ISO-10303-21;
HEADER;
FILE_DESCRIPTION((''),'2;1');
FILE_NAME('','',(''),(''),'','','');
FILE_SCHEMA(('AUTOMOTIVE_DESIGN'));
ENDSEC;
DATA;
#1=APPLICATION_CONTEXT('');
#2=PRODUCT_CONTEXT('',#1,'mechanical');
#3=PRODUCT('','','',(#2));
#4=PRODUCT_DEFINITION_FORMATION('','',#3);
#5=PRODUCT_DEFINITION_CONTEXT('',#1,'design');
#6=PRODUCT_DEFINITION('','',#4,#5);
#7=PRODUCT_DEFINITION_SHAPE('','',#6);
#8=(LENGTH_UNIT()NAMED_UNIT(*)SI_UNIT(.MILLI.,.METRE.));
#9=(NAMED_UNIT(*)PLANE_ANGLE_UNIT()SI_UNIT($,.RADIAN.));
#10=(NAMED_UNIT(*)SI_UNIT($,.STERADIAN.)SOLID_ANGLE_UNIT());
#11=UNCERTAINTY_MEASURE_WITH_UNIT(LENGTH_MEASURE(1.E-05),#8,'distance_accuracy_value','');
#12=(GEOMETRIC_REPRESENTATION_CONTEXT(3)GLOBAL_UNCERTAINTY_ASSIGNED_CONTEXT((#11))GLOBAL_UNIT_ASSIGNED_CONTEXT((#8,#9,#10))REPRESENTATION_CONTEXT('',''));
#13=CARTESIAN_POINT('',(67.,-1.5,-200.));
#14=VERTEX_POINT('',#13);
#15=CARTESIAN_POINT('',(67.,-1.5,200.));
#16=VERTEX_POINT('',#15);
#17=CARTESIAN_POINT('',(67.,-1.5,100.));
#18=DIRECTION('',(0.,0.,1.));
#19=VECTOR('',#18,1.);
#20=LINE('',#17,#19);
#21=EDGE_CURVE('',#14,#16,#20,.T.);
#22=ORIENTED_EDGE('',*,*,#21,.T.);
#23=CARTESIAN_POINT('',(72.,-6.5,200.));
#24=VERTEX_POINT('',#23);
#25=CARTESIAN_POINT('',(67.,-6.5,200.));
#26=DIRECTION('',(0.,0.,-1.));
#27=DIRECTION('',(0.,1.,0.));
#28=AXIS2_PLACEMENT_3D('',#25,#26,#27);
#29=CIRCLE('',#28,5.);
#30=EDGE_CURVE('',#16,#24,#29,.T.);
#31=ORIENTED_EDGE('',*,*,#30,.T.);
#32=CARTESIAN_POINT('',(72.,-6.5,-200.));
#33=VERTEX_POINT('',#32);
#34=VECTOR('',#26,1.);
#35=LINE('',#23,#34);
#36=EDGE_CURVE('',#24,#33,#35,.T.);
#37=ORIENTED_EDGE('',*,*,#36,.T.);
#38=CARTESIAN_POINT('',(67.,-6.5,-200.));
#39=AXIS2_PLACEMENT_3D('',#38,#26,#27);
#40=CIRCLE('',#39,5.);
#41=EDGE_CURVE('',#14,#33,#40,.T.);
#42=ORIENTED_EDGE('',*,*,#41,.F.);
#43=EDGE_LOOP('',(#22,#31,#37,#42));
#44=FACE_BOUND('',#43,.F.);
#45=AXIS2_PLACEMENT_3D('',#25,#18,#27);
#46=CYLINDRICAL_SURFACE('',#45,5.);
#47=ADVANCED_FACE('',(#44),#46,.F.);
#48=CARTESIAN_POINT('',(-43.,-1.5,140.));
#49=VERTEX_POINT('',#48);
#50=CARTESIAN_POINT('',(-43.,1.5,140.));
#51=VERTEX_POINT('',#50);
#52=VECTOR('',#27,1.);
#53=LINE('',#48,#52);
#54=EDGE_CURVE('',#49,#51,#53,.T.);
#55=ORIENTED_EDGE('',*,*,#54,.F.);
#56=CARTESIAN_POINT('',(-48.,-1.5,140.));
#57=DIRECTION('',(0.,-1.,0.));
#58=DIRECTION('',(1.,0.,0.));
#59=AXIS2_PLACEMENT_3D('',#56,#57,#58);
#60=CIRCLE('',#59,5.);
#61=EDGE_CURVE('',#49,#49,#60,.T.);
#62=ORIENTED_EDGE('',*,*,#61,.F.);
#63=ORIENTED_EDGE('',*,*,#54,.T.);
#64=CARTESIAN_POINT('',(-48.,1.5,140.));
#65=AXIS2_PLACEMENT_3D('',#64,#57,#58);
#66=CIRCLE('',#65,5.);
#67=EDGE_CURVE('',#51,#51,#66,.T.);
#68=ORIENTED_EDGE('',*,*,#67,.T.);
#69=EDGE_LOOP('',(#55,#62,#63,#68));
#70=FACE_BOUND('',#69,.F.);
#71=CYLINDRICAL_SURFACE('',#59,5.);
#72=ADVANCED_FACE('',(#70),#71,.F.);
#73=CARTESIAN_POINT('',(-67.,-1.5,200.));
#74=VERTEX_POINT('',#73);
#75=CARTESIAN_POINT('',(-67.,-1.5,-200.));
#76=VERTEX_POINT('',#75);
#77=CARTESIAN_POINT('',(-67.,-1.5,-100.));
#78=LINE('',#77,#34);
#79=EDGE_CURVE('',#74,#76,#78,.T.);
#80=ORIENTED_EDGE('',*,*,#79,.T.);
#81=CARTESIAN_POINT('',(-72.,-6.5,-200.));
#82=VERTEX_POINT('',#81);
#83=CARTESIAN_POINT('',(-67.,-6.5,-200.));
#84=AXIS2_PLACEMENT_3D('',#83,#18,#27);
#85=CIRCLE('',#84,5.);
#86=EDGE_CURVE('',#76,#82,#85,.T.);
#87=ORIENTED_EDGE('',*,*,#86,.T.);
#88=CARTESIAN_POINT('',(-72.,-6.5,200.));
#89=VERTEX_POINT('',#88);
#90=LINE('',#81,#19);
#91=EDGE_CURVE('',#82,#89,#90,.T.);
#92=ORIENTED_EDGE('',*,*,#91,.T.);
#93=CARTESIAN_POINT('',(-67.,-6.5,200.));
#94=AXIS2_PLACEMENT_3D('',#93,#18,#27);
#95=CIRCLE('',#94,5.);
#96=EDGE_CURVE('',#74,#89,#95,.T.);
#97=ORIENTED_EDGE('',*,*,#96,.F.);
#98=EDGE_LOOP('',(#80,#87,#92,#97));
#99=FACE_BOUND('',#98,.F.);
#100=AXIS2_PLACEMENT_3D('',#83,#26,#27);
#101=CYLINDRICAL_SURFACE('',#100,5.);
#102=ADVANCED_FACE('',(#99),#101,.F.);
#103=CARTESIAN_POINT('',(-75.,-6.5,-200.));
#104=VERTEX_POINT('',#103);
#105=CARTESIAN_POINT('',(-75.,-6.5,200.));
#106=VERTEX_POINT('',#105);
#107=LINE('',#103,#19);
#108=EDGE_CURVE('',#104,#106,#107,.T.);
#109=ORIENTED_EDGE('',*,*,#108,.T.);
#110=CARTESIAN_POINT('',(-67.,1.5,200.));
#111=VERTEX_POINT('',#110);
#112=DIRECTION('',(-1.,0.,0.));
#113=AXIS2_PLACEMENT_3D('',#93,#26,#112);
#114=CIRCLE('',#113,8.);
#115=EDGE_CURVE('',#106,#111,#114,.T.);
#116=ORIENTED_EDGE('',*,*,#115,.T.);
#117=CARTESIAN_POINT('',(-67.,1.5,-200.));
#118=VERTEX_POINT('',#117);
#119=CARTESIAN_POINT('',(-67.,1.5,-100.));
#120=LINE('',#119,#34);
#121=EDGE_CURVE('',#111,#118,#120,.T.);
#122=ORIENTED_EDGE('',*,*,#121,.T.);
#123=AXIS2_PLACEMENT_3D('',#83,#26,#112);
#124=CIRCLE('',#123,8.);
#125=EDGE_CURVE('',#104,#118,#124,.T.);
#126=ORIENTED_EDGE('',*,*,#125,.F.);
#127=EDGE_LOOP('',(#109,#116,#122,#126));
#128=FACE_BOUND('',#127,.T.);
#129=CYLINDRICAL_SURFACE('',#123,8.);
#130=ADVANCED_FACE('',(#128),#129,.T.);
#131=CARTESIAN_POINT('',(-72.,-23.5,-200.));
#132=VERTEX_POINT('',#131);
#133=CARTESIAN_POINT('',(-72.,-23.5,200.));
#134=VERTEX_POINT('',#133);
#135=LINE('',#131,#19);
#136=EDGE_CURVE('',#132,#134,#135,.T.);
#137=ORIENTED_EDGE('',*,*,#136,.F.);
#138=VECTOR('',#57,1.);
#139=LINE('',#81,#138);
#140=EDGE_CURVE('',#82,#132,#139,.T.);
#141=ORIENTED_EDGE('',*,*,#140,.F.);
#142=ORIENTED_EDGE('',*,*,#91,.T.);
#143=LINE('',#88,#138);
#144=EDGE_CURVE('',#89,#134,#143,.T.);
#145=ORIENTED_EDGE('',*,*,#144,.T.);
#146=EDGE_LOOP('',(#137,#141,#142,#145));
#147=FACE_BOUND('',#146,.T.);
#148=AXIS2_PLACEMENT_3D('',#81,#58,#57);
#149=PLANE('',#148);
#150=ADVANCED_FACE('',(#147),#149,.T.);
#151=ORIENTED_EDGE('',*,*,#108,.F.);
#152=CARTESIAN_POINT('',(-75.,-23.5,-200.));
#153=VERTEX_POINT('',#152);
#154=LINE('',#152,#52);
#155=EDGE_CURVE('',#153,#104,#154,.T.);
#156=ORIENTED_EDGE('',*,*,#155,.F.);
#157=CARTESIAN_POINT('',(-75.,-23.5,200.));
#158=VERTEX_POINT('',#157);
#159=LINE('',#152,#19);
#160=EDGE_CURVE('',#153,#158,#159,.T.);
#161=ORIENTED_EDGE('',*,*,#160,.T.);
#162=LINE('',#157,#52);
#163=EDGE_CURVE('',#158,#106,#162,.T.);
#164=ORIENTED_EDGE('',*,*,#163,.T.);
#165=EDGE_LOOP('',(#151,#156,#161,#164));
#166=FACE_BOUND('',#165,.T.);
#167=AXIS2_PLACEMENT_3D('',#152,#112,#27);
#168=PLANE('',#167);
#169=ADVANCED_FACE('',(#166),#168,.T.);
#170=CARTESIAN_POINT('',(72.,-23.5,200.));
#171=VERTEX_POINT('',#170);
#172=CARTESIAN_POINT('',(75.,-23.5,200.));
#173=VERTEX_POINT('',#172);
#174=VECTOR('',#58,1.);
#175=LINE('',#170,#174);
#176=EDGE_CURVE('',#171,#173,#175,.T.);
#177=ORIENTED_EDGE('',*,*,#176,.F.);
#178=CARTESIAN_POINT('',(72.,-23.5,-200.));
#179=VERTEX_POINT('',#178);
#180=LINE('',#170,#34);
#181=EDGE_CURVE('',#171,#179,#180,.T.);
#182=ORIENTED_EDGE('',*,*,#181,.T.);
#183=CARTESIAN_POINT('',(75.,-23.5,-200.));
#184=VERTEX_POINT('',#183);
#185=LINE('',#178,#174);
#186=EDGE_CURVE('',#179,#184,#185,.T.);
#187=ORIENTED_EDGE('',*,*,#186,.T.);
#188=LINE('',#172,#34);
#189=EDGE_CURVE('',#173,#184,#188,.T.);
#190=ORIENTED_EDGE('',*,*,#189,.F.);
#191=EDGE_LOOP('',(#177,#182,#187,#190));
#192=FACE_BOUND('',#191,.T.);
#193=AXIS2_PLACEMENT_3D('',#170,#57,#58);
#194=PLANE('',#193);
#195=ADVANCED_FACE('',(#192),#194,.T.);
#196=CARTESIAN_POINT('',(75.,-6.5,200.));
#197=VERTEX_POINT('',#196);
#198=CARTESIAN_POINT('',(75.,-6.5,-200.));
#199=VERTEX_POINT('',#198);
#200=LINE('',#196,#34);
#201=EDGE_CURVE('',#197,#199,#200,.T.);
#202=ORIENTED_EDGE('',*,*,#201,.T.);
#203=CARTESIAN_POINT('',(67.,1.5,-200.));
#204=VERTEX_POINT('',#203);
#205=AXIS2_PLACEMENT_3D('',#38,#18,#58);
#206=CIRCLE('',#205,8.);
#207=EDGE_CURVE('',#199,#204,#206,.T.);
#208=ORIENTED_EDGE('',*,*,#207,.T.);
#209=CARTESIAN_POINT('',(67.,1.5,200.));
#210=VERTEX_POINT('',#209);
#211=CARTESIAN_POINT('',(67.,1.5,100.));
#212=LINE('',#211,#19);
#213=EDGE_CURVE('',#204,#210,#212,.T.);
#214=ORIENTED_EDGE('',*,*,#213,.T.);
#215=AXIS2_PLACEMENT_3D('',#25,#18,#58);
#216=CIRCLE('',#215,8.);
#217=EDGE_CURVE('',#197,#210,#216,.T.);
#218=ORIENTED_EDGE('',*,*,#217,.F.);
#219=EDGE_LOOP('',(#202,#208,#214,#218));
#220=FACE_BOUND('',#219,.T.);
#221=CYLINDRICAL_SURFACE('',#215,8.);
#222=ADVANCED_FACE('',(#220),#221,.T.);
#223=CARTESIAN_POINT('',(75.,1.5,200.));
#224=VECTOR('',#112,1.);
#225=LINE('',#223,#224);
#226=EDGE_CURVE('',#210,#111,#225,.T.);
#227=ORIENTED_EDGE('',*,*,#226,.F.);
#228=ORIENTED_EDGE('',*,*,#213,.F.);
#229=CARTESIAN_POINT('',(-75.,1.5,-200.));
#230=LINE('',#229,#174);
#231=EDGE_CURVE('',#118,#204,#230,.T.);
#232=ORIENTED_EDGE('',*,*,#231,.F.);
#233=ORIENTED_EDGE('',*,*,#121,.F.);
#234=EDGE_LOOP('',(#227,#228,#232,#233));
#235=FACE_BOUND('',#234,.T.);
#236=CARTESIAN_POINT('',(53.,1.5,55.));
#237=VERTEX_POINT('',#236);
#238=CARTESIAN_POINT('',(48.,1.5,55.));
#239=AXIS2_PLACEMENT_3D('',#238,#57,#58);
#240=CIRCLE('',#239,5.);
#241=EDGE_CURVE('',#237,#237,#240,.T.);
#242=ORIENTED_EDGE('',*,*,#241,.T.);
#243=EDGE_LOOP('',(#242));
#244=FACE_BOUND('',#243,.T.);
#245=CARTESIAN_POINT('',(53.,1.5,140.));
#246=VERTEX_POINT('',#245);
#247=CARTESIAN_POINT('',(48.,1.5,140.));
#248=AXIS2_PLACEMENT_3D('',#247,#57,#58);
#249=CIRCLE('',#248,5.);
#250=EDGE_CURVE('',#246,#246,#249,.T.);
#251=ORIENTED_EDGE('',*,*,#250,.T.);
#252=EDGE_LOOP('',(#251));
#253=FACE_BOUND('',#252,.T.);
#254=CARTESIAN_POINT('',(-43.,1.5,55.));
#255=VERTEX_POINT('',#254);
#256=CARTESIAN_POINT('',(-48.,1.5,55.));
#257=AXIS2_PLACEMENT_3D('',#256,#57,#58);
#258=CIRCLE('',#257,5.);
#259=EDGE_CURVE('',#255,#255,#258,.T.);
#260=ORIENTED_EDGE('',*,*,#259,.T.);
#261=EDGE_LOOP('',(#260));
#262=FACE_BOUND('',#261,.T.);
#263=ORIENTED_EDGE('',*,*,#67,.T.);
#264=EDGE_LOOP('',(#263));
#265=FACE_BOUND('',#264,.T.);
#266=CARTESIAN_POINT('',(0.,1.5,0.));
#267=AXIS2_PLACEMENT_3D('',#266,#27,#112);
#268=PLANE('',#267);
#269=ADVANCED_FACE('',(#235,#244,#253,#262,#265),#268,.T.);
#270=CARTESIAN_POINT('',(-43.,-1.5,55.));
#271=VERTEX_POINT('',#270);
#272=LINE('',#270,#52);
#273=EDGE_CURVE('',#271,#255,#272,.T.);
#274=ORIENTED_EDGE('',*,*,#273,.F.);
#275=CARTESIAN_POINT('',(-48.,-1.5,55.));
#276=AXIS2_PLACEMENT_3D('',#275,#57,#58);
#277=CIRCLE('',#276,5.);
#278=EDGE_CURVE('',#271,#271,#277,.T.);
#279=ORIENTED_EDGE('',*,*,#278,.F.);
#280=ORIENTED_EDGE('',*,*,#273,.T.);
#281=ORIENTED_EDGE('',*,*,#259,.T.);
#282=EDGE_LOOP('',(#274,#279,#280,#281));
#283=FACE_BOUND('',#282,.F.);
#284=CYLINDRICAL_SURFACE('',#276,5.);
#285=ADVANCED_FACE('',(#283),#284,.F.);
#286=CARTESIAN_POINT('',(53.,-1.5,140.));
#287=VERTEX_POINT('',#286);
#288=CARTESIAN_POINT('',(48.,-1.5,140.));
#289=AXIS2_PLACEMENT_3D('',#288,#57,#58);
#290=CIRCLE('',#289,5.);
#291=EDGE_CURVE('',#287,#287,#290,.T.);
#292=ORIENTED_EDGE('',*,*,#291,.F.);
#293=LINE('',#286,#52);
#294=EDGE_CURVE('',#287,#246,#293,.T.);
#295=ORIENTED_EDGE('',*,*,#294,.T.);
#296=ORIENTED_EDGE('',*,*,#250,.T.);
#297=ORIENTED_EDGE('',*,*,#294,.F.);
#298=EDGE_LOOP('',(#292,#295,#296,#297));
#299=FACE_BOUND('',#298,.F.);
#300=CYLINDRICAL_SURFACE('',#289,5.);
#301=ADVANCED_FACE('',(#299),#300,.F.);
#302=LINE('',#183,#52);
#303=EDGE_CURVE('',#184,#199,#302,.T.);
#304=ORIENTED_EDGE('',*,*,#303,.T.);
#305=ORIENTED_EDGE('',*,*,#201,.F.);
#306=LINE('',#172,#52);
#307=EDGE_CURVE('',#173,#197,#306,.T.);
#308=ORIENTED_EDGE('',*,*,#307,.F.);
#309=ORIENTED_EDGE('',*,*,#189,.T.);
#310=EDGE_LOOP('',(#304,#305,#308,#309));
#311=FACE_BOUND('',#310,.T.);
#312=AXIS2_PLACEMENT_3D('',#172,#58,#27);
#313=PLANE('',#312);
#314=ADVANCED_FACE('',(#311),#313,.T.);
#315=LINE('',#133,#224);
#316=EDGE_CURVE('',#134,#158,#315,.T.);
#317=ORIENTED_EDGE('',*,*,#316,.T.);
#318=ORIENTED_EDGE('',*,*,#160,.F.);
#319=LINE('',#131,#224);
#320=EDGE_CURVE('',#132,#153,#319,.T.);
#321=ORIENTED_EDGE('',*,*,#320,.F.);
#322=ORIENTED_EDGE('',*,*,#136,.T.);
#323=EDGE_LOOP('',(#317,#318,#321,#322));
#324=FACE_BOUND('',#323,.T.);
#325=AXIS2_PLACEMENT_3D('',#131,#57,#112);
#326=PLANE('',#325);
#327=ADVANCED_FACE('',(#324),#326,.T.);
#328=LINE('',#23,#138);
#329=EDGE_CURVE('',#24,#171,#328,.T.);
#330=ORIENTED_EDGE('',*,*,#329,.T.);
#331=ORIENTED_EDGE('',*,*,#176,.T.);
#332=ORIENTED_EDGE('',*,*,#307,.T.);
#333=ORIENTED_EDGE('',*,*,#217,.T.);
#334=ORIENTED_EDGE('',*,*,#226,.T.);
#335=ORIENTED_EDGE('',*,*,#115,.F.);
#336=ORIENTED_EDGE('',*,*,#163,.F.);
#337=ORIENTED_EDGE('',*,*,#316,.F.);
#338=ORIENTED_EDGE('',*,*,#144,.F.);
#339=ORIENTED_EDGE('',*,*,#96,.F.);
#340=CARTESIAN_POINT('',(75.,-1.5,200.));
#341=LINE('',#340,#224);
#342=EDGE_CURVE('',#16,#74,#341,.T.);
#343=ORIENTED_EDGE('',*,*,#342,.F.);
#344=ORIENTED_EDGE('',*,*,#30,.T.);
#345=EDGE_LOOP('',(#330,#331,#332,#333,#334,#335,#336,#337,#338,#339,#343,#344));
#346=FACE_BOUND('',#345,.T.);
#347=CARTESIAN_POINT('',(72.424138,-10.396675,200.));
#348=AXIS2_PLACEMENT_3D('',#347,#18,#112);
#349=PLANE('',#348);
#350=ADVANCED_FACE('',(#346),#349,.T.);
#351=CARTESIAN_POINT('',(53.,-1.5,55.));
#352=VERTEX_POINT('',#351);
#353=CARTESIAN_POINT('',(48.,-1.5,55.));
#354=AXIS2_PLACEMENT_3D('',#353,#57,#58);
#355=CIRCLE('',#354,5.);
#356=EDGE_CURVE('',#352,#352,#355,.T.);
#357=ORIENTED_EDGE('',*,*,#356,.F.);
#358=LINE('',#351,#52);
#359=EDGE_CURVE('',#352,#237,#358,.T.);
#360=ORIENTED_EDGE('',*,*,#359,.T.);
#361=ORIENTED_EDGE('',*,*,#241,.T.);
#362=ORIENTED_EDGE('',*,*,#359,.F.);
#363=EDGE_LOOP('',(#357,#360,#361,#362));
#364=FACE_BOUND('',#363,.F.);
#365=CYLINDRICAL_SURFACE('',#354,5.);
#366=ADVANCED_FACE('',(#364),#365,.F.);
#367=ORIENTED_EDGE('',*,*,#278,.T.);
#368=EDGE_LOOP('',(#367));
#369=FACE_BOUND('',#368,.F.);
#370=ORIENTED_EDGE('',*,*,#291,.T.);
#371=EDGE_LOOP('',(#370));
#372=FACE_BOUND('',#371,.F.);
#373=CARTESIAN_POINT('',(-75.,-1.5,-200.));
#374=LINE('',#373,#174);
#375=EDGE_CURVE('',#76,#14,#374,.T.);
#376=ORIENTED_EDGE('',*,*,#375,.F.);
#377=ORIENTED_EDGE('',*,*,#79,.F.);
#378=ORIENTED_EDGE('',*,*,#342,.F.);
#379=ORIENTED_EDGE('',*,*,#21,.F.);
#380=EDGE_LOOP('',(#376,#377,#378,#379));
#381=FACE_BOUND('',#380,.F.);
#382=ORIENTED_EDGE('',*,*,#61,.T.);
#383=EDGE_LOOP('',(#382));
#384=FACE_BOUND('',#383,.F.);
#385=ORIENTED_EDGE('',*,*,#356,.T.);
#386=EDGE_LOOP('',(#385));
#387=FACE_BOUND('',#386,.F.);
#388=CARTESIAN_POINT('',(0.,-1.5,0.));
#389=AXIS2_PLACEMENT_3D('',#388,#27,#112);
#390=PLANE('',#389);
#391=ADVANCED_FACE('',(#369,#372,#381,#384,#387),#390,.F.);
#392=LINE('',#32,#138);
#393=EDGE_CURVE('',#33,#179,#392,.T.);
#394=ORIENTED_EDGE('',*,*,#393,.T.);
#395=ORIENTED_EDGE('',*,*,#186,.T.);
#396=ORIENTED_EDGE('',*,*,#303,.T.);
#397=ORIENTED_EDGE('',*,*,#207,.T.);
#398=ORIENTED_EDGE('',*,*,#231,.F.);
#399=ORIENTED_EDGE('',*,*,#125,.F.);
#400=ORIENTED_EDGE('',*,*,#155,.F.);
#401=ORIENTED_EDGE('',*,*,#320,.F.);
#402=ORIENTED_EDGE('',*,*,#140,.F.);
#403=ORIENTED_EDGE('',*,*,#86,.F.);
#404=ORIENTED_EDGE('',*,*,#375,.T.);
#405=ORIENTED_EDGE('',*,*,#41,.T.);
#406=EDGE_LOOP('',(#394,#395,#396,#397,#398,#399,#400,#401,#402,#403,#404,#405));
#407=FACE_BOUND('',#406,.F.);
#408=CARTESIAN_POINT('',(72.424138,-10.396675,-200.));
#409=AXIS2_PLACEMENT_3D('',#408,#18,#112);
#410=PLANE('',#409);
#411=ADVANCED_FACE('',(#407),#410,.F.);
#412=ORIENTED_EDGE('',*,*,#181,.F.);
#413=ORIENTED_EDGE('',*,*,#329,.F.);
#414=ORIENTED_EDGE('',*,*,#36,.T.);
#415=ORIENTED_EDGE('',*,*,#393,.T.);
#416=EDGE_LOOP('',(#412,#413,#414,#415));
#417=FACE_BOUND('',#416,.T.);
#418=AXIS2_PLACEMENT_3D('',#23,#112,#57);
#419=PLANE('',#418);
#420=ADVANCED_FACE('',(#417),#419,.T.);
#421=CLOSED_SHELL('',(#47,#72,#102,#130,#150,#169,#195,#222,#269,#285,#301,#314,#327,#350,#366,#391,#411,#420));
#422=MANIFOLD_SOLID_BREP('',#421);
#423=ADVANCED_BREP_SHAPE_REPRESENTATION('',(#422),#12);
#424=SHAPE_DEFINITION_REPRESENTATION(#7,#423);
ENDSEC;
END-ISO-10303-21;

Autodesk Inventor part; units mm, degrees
ref_plane "YZ Plane" through (0, 0, 0) normal (1, 0, 0) x (0, 1, 0)
ref_plane "XZ Plane" through (0, 0, 0) normal (0, 1, 0) x (-1, 0, 0)
ref_plane "XY Plane" through (0, 0, 0) normal (0, 0, 1) x (1, 0, 0)
sketch "Sketch4" plane through (0, 0, 0) normal (0, 1, 0) x (-1, 0, 0)
  line L0 (75, -200) -> (-75, -200)
  line L1 (-75, -200) -> (-75, 200)
  line L2 (-75, 200) -> (75, 200)
  line L3 (75, 200) -> (75, -200)
  line L4 (75, -200) -> (-75, 200) construction
  point P0 (0, 0)
  point P1 (0, 0)
  dimension "d24" = 150
  dimension "d25" = 400
extrude "Plate4" add sketch "Sketch4" along normal mid plane 3
sketch "Sketch7" plane through (0, -1.5, 0) normal (0, -1, 0) x (1, 0, 0)
  circle A0 centre (48, 55) radius 5
  line L0 (75, 200) -> (75, -200) projected
  line L1 (75, -200) -> (-75, -200) projected
  line L2 (0, -200) -> (0, 200) construction
  line L3 (75, 0) -> (-75, 0) construction
  circle A1 centre (-48, 55) radius 5
  circle A2 centre (48, 140) radius 5
  circle A3 centre (-48, 140) radius 5
  line L4 (75, 200) -> (-75, 200) projected
  point P0 (0, 0)
  point P1 (0, 0)
  dimension "d41" = 10
  dimension "d46" = 85
  dimension "d57" = 96
  dimension "d70" = 145
extrude "Extrusion2" cut sketch "Sketch7" against normal up to surface (3 mm away)
sketch "Sketch9" plane through (72, 1.5, -200) normal (1, 0, 0) x (0, -1, 0)
  line L0 (0, 400) -> (0, 0)
  line L1 (0, 0) -> (25, 0)
  line L2 (25, 0) -> (25, 400)
  line L3 (25, 400) -> (0, 400)
edge flange "Flange5" height 25 angle 90 thickness 3 bend radius 5 thickness toward (1, 0, 0) relief round relief width 3 relief depth 1.5 corner gap 5 corner form 0 edges at (75, 1.5, 0) (-75, 1.5, 0) wall of the first edge with corners at (72, 1.5, 200) (72, 1.5, -200) (72, -23.5, -200) (72, -23.5, 200)
bend "Bend5"
corner "Corner5"
sketch "Sketch12" plane through (0, 1.5, 0) normal (0, 1, 0) x (1, 0, 0)
  line L0 (-67, 200) -> (-67, -200) projected
  line L1 (67, -200) -> (-67, -200) projected
  line L2 (-56.875, -200) -> (-56.875, -81.7006) construction
  line L3 (-67, -150) -> (-26.2093, -150) construction
  circle A0 centre (-56.875, -150) radius 3
  point P0 (0, 0)
  dimension "d86" = 10.125
  dimension "d87" = 50
  dimension "d88" = 6
extrude "Extrusion5" [suppressed]
pattern_linear "Rectangular Pattern2" [suppressed]
equation "\"d25\" = Длина_базовой_пластины"
equation "\"d26\" = Thickness"
equation "\"d60\" = BendReliefWidth"
equation "\"d61\" = BendReliefDepth"
equation "\"d62\" = MinimumRemnant"
equation "\"d63\" = TransitionRadius"
equation "\"d66\" = BendRadius"
equation "\"d67\" = CornerReliefSize"
equation "\"d68\" = GapSize"
equation "\"d69\" = JacobiRadiusSize"
equation "\"BendReliefWidth\" = Thickness"
equation "\"BendReliefDepth\" = 0.5 * Thickness"
equation "\"CornerReliefSize\" = 4 * Thickness"
equation "\"MinimumRemnant\" = 2 * Thickness"
equation "\"TransitionRadius\" = BendRadius"
equation "\"JacobiRadiusSize\" = BendRadius"
equation "\"GapSize\" = Thickness"
equation "\"Длина_базовой_пластины\" = 400"
equation "\"Thickness\" = 3"
equation "\"BendRadius\" = 5"
properties part number "base plate 1" material "Stainless Steel"
